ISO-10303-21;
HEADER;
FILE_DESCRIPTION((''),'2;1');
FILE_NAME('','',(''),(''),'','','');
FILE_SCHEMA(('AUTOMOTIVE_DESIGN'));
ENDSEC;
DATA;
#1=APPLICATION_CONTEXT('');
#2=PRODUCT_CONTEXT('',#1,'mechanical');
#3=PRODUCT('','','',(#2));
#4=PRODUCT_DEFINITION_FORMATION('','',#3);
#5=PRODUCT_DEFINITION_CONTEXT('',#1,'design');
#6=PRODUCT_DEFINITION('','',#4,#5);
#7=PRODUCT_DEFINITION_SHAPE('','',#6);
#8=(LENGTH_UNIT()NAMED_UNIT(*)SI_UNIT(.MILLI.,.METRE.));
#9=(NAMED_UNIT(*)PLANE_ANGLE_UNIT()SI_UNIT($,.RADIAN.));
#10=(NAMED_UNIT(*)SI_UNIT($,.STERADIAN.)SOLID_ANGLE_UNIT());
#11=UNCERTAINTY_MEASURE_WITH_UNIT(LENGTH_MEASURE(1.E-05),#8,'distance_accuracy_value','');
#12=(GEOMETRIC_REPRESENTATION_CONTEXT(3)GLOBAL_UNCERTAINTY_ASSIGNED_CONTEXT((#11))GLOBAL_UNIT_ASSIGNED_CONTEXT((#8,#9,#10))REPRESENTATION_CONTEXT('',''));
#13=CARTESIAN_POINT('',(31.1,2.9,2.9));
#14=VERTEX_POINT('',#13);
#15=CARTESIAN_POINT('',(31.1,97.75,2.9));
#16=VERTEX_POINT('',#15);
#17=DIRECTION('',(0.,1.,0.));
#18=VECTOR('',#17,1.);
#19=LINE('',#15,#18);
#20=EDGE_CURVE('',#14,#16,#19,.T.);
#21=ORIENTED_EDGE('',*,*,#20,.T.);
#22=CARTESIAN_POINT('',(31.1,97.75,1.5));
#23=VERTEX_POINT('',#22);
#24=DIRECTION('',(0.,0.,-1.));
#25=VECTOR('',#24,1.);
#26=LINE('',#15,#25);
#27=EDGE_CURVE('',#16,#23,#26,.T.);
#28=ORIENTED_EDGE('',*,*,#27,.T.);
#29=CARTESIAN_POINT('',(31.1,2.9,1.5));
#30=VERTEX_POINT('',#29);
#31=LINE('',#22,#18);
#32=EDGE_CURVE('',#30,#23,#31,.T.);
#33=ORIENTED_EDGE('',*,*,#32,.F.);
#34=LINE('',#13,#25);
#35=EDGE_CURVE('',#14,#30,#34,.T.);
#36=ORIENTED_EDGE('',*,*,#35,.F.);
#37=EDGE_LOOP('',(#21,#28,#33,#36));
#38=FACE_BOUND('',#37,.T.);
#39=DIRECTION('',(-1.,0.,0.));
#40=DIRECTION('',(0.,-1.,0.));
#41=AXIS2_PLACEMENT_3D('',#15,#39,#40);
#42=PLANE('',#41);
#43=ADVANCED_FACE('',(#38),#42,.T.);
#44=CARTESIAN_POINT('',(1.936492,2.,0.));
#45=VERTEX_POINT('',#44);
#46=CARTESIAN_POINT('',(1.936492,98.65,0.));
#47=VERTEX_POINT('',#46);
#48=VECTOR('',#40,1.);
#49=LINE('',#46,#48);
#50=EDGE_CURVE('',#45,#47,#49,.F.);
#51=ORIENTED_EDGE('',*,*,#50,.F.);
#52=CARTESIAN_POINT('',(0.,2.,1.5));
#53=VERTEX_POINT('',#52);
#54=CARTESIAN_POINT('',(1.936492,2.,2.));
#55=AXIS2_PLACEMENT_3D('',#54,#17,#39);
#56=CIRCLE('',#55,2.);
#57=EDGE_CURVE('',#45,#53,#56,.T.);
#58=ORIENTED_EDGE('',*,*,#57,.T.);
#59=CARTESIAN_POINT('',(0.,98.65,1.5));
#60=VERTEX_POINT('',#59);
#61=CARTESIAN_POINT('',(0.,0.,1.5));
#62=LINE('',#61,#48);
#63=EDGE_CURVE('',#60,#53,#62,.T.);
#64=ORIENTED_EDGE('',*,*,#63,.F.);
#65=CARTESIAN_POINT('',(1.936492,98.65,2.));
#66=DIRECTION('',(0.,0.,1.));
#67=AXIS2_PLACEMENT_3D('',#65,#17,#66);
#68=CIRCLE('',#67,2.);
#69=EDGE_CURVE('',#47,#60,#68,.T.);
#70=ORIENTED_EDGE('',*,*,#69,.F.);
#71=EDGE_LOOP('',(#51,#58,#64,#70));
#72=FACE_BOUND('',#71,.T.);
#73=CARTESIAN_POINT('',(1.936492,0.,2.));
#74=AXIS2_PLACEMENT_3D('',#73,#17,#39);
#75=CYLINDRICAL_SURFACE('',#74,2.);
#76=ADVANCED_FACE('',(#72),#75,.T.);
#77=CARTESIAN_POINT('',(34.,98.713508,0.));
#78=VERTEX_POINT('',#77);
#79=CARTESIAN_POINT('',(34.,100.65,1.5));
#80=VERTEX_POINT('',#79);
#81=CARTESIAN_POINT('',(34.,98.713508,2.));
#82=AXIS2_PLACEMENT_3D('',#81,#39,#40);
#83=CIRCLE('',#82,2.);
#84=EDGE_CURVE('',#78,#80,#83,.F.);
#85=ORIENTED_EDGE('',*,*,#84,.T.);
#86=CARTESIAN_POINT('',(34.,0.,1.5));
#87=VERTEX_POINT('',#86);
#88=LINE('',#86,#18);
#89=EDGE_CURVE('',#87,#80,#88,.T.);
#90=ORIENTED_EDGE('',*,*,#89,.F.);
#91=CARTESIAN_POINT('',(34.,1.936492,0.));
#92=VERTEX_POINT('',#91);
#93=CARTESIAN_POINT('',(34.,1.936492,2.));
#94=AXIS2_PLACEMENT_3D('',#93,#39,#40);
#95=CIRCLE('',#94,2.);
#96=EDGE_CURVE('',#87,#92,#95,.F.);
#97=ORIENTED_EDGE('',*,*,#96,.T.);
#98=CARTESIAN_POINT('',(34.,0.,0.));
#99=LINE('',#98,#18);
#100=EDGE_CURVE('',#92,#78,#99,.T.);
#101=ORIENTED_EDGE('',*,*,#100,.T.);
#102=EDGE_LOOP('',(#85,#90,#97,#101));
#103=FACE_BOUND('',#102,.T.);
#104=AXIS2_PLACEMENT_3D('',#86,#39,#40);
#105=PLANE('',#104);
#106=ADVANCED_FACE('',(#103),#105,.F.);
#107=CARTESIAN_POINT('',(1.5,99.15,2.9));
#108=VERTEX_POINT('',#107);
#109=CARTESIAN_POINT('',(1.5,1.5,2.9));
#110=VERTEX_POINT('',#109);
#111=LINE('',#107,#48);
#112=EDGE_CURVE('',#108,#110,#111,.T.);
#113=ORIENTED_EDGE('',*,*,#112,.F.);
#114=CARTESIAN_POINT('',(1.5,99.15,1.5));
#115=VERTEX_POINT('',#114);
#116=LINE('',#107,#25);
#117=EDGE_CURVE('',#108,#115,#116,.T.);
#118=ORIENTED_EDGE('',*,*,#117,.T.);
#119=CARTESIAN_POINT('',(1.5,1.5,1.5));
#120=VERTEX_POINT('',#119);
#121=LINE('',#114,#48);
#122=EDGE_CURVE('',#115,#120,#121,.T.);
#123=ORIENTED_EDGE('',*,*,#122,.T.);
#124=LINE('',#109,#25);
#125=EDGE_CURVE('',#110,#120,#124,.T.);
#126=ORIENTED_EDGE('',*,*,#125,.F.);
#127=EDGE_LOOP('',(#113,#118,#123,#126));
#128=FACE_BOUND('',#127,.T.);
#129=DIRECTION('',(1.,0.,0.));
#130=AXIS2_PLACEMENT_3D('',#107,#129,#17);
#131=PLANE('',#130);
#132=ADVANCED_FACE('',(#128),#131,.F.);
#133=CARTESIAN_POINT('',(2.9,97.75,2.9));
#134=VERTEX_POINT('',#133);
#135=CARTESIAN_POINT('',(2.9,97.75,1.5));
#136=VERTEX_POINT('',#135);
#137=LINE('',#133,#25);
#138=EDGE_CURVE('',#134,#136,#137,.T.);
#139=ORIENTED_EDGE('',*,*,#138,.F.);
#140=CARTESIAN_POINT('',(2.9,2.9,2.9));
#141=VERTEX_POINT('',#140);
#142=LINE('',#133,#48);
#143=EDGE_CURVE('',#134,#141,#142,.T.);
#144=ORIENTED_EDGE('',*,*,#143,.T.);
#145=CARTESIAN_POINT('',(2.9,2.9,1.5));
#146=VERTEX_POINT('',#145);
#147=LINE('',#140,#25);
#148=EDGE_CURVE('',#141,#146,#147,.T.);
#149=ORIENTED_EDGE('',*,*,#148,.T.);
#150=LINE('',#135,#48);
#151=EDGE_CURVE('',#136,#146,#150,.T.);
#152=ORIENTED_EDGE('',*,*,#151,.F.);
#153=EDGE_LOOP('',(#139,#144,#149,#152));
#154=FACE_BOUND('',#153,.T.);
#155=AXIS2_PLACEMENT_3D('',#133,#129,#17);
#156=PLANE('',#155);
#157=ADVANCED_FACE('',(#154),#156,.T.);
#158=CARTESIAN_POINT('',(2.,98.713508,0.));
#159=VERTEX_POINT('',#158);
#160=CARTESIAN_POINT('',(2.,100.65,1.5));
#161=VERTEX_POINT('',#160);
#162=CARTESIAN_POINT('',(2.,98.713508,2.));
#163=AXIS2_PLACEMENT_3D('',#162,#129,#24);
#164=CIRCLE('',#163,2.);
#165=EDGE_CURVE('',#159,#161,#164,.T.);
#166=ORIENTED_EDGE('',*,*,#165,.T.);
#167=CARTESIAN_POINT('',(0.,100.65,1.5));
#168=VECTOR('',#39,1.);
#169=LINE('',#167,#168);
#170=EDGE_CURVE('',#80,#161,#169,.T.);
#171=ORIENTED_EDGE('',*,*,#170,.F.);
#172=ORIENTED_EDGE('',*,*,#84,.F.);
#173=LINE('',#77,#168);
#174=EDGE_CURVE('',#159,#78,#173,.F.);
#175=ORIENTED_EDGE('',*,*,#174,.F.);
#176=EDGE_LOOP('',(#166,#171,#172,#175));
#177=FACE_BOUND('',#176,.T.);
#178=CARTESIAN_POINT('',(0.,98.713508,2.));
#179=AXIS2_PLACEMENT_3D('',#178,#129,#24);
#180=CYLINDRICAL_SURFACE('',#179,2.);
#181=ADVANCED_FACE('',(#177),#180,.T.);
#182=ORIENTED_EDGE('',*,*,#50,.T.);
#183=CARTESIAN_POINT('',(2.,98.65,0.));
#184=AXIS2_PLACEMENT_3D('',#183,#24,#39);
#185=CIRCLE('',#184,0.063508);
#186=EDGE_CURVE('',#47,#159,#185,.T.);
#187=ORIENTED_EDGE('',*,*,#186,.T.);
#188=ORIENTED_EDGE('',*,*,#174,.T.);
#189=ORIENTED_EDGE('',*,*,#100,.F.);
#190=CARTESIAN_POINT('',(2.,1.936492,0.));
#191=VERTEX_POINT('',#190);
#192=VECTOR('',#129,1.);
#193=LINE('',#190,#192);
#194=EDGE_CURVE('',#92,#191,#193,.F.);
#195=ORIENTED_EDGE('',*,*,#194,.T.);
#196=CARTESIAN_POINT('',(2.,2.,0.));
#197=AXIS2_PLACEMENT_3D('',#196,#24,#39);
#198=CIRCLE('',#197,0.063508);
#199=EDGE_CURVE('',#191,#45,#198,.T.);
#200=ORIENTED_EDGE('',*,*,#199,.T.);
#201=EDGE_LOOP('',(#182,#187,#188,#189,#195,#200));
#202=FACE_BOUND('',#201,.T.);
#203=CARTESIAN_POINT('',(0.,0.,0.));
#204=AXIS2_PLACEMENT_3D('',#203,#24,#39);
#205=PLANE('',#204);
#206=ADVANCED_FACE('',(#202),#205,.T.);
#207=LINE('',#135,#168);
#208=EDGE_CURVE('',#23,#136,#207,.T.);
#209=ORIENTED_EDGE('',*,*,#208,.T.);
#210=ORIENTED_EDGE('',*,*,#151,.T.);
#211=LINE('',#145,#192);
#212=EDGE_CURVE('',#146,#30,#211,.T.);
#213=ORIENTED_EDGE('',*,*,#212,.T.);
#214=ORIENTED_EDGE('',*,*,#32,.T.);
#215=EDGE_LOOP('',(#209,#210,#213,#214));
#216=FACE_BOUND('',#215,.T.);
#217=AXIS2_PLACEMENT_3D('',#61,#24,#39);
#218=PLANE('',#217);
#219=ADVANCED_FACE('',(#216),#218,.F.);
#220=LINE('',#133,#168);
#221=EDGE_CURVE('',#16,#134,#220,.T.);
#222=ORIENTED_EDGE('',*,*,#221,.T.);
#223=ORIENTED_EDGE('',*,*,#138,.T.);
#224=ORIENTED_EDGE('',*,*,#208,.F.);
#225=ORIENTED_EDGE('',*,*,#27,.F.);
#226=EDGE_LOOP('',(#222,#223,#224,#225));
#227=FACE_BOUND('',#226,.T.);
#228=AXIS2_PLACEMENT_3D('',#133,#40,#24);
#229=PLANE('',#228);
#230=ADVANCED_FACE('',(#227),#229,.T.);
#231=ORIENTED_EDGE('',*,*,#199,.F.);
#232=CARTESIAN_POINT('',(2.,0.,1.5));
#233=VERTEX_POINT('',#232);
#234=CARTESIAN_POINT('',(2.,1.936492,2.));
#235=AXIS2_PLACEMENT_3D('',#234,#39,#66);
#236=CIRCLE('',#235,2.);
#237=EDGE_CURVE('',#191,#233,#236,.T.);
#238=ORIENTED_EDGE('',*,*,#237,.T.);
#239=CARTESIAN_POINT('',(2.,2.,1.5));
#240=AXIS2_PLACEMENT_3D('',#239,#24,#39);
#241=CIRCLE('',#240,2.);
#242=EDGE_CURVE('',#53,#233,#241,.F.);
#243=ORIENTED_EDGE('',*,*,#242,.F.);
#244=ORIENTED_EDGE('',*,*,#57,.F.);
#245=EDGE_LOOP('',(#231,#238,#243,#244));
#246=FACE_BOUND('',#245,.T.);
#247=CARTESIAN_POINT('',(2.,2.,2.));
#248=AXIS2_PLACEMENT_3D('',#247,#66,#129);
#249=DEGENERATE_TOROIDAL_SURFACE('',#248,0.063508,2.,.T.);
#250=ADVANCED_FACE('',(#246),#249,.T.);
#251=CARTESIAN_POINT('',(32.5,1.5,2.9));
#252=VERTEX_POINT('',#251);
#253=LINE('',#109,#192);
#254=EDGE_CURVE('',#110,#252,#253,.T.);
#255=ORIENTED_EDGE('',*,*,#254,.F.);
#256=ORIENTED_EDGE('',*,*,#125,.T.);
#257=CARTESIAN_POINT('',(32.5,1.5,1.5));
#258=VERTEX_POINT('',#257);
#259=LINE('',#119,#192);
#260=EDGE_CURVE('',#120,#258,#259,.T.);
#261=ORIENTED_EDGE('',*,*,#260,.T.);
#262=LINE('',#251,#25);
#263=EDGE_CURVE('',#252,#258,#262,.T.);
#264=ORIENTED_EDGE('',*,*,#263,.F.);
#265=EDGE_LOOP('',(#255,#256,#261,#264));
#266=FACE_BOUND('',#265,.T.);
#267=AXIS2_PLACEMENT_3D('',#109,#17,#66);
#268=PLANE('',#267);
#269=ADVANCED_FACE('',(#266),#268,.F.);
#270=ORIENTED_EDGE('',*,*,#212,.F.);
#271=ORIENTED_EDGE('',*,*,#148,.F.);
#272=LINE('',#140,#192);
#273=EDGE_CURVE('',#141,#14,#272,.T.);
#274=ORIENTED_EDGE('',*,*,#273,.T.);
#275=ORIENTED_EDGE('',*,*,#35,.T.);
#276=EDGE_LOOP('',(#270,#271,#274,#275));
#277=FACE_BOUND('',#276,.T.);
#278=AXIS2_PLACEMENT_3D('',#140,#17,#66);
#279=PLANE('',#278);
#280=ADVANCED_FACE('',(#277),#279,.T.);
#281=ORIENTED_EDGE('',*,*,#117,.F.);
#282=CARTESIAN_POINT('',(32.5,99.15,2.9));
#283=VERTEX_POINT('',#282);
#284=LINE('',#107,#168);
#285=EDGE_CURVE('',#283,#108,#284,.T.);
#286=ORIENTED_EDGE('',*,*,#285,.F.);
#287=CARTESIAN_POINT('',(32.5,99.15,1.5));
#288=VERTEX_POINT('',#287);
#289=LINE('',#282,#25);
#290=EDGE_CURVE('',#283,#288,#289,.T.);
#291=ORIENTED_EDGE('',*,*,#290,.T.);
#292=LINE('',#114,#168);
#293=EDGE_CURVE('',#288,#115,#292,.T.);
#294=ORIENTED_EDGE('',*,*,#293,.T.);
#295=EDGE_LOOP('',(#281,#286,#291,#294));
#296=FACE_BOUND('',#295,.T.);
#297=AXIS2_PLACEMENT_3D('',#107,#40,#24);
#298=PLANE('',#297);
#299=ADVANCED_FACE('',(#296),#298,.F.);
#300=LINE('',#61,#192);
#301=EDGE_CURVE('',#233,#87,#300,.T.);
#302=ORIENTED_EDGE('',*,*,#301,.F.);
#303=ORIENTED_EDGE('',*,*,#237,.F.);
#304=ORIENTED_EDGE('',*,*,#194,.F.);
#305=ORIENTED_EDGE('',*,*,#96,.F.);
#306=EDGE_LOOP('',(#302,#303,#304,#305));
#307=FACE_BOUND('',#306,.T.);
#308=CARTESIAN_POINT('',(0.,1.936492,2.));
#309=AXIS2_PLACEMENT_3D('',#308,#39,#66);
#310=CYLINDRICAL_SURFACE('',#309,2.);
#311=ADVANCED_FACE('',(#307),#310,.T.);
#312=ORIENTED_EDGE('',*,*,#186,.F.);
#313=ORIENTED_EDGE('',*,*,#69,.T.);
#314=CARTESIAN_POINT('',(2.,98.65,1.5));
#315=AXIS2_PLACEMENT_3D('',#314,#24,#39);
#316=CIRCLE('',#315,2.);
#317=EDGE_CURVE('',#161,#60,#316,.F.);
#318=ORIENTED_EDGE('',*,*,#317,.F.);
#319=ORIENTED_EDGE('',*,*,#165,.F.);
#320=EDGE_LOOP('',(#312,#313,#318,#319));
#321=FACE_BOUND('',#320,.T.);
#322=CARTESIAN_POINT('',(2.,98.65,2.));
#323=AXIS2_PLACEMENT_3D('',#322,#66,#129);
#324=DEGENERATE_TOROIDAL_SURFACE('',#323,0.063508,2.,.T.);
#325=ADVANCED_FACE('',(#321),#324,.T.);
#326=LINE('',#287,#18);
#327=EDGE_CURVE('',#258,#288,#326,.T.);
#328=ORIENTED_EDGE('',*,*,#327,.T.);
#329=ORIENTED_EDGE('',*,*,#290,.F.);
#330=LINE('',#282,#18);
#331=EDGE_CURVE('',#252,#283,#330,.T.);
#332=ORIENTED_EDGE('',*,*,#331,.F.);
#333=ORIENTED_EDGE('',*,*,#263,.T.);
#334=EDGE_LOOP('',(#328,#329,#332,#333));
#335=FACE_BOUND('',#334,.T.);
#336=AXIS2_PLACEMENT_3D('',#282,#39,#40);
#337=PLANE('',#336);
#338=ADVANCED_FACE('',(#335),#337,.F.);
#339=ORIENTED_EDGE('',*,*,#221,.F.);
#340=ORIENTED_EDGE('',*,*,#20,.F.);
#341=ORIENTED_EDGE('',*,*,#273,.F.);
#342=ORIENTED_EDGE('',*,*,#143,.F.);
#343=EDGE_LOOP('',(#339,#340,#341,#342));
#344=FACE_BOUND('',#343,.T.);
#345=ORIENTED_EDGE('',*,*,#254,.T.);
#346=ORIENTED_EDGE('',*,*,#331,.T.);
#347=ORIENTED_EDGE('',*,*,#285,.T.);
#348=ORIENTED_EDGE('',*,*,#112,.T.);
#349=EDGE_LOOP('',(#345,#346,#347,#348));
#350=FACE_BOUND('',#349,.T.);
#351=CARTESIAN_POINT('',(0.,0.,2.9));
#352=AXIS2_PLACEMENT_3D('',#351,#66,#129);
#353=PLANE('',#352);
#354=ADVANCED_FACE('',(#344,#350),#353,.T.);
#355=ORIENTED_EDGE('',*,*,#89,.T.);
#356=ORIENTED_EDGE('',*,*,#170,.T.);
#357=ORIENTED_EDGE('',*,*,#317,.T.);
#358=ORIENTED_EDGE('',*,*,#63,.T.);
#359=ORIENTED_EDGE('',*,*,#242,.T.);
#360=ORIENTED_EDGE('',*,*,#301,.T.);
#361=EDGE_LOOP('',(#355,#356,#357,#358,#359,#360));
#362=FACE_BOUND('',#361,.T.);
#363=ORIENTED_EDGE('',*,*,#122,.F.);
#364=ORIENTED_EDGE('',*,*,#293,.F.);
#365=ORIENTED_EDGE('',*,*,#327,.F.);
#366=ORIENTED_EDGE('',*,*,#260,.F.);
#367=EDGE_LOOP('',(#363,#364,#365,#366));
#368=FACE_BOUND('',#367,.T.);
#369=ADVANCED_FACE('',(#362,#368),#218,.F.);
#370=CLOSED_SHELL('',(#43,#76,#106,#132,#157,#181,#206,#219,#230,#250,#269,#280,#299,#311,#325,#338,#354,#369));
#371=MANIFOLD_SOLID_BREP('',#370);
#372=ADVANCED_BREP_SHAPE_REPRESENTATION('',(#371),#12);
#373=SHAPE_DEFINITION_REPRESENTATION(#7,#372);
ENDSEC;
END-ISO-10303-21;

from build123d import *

# Parameters (mm, degrees)
ESQUISSE1_W        = 34
ESQUISSE1_H        = 100.65
BOSS_EXTRU_1_DEPTH = 1.5
ESQUISSE2_W        = 31
ESQUISSE2_H        = 97.65
ESQUISSE2_W_2      = 28.2
ESQUISSE2_H_2      = 94.85
BOSS_EXTRU_2_DEPTH = 1.4
CONG_6_R           = 2
CONG_8_R           = 2
CONG_9_R           = 2


with BuildPart() as part:
    # Esquisse1 → Boss.-Extru.1 (new body)
    with BuildSketch(Plane.XY):
        with Locations((17, 50.325)):
            Rectangle(ESQUISSE1_W, ESQUISSE1_H)
    extrude(amount=BOSS_EXTRU_1_DEPTH)

    # Esquisse2 → Boss.-Extru.2 (add)
    with BuildSketch(Plane.XY.offset(1.5)):
        with Locations((17, 50.325)):
            Rectangle(ESQUISSE2_W, ESQUISSE2_H)
        with Locations((17, 50.325)):
            Rectangle(ESQUISSE2_W_2, ESQUISSE2_H_2, mode=Mode.SUBTRACT)
    extrude(amount=BOSS_EXTRU_2_DEPTH)

    # Congé6
    cong_6_edges = [part.edges().sort_by_distance(p)[0] for p in [
        (0, 0, 0.75),
    ]]
    fillet(cong_6_edges, radius=CONG_6_R)

    # Congé8
    cong_8_edges = [part.edges().sort_by_distance(p)[0] for p in [
        (0, 100.65, 0.75),
    ]]
    fillet(cong_8_edges, radius=CONG_8_R)

    # Congé9
    # the kernel refuses this fillet: 2 mm, written as the material it takes off along each edge
    with BuildSketch(Plane(origin=(38.841229183, 100.65, 0), x_dir=(0, -1, 0), z_dir=(-1, 0, 0)), Plane(origin=(2, 0, 0), x_dir=(0, 1, 0), z_dir=(1, 0, 0))) as cong_9_piece_1:
        with BuildLine():
            CenterArc((1.936491673, 2), CONG_9_R, 194.477512186, 75.522487814)
            Line((0, 1.5), (-0.038729833, 1.49))
            ThreePointArc((-0.038729833, 1.49), (-0.04, 0.75), (-0.04, 0))
            Line((-0.04, 0), (0, -0.04))
            Line((0, -0.04), (1.936491673, -0.04))
            Line((1.936491673, -0.04), (1.936491673, 0))
        make_face()
    extrude(amount=36.841229183, mode=Mode.SUBTRACT)
    with BuildSketch(Plane(origin=(2, 98.65, 0), x_dir=(-1, 0, 0), z_dir=(0, -1, 0))) as cong_9_piece_2:
        with BuildLine():
            CenterArc((0.063508327, -2), CONG_9_R, 14.477512186, 75.522487814)
            Line((2, -1.5), (2.038729833, -1.49))
            ThreePointArc((2.038729833, -1.49), (2.04, -0.75), (2.04, 0))
            Line((2.04, 0), (2, 0.04))
            Line((2, 0.04), (0.063508327, 0.04))
            Line((0.063508327, 0.04), (0.063508327, 0))
        make_face()
    revolve(axis=Axis((2, 98.65, 0), (0, 0, -1)), revolution_arc=90, mode=Mode.SUBTRACT)
    with BuildSketch(Plane(origin=(0, 98.65, 0), x_dir=(1, 0, 0), z_dir=(0, -1, 0))) as cong_9_piece_3:
        with BuildLine():
            CenterArc((1.936491673, 2), CONG_9_R, 194.477512186, 75.522487814)
            Line((0, 1.5), (-0.038729833, 1.49))
            ThreePointArc((-0.038729833, 1.49), (-0.04, 0.75), (-0.04, 0))
            Line((-0.04, 0), (0, -0.04))
            Line((0, -0.04), (1.936491673, -0.04))
            Line((1.936491673, -0.04), (1.936491673, 0))
        make_face()
    extrude(amount=96.65, mode=Mode.SUBTRACT)
    with BuildSketch(Plane(origin=(2, 2, 0), x_dir=(0, -1, 0), z_dir=(1, 0, 0))) as cong_9_piece_4:
        with BuildLine():
            CenterArc((0.063508327, -2), CONG_9_R, 14.477512186, 75.522487814)
            Line((2, -1.5), (2.038729833, -1.49))
            ThreePointArc((2.038729833, -1.49), (2.04, -0.75), (2.04, 0))
            Line((2.04, 0), (2, 0.04))
            Line((2, 0.04), (0.063508327, 0.04))
            Line((0.063508327, 0.04), (0.063508327, 0))
        make_face()
    revolve(axis=Axis((2, 2, 0), (0, 0, -1)), revolution_arc=90, mode=Mode.SUBTRACT)


solid = part.part
